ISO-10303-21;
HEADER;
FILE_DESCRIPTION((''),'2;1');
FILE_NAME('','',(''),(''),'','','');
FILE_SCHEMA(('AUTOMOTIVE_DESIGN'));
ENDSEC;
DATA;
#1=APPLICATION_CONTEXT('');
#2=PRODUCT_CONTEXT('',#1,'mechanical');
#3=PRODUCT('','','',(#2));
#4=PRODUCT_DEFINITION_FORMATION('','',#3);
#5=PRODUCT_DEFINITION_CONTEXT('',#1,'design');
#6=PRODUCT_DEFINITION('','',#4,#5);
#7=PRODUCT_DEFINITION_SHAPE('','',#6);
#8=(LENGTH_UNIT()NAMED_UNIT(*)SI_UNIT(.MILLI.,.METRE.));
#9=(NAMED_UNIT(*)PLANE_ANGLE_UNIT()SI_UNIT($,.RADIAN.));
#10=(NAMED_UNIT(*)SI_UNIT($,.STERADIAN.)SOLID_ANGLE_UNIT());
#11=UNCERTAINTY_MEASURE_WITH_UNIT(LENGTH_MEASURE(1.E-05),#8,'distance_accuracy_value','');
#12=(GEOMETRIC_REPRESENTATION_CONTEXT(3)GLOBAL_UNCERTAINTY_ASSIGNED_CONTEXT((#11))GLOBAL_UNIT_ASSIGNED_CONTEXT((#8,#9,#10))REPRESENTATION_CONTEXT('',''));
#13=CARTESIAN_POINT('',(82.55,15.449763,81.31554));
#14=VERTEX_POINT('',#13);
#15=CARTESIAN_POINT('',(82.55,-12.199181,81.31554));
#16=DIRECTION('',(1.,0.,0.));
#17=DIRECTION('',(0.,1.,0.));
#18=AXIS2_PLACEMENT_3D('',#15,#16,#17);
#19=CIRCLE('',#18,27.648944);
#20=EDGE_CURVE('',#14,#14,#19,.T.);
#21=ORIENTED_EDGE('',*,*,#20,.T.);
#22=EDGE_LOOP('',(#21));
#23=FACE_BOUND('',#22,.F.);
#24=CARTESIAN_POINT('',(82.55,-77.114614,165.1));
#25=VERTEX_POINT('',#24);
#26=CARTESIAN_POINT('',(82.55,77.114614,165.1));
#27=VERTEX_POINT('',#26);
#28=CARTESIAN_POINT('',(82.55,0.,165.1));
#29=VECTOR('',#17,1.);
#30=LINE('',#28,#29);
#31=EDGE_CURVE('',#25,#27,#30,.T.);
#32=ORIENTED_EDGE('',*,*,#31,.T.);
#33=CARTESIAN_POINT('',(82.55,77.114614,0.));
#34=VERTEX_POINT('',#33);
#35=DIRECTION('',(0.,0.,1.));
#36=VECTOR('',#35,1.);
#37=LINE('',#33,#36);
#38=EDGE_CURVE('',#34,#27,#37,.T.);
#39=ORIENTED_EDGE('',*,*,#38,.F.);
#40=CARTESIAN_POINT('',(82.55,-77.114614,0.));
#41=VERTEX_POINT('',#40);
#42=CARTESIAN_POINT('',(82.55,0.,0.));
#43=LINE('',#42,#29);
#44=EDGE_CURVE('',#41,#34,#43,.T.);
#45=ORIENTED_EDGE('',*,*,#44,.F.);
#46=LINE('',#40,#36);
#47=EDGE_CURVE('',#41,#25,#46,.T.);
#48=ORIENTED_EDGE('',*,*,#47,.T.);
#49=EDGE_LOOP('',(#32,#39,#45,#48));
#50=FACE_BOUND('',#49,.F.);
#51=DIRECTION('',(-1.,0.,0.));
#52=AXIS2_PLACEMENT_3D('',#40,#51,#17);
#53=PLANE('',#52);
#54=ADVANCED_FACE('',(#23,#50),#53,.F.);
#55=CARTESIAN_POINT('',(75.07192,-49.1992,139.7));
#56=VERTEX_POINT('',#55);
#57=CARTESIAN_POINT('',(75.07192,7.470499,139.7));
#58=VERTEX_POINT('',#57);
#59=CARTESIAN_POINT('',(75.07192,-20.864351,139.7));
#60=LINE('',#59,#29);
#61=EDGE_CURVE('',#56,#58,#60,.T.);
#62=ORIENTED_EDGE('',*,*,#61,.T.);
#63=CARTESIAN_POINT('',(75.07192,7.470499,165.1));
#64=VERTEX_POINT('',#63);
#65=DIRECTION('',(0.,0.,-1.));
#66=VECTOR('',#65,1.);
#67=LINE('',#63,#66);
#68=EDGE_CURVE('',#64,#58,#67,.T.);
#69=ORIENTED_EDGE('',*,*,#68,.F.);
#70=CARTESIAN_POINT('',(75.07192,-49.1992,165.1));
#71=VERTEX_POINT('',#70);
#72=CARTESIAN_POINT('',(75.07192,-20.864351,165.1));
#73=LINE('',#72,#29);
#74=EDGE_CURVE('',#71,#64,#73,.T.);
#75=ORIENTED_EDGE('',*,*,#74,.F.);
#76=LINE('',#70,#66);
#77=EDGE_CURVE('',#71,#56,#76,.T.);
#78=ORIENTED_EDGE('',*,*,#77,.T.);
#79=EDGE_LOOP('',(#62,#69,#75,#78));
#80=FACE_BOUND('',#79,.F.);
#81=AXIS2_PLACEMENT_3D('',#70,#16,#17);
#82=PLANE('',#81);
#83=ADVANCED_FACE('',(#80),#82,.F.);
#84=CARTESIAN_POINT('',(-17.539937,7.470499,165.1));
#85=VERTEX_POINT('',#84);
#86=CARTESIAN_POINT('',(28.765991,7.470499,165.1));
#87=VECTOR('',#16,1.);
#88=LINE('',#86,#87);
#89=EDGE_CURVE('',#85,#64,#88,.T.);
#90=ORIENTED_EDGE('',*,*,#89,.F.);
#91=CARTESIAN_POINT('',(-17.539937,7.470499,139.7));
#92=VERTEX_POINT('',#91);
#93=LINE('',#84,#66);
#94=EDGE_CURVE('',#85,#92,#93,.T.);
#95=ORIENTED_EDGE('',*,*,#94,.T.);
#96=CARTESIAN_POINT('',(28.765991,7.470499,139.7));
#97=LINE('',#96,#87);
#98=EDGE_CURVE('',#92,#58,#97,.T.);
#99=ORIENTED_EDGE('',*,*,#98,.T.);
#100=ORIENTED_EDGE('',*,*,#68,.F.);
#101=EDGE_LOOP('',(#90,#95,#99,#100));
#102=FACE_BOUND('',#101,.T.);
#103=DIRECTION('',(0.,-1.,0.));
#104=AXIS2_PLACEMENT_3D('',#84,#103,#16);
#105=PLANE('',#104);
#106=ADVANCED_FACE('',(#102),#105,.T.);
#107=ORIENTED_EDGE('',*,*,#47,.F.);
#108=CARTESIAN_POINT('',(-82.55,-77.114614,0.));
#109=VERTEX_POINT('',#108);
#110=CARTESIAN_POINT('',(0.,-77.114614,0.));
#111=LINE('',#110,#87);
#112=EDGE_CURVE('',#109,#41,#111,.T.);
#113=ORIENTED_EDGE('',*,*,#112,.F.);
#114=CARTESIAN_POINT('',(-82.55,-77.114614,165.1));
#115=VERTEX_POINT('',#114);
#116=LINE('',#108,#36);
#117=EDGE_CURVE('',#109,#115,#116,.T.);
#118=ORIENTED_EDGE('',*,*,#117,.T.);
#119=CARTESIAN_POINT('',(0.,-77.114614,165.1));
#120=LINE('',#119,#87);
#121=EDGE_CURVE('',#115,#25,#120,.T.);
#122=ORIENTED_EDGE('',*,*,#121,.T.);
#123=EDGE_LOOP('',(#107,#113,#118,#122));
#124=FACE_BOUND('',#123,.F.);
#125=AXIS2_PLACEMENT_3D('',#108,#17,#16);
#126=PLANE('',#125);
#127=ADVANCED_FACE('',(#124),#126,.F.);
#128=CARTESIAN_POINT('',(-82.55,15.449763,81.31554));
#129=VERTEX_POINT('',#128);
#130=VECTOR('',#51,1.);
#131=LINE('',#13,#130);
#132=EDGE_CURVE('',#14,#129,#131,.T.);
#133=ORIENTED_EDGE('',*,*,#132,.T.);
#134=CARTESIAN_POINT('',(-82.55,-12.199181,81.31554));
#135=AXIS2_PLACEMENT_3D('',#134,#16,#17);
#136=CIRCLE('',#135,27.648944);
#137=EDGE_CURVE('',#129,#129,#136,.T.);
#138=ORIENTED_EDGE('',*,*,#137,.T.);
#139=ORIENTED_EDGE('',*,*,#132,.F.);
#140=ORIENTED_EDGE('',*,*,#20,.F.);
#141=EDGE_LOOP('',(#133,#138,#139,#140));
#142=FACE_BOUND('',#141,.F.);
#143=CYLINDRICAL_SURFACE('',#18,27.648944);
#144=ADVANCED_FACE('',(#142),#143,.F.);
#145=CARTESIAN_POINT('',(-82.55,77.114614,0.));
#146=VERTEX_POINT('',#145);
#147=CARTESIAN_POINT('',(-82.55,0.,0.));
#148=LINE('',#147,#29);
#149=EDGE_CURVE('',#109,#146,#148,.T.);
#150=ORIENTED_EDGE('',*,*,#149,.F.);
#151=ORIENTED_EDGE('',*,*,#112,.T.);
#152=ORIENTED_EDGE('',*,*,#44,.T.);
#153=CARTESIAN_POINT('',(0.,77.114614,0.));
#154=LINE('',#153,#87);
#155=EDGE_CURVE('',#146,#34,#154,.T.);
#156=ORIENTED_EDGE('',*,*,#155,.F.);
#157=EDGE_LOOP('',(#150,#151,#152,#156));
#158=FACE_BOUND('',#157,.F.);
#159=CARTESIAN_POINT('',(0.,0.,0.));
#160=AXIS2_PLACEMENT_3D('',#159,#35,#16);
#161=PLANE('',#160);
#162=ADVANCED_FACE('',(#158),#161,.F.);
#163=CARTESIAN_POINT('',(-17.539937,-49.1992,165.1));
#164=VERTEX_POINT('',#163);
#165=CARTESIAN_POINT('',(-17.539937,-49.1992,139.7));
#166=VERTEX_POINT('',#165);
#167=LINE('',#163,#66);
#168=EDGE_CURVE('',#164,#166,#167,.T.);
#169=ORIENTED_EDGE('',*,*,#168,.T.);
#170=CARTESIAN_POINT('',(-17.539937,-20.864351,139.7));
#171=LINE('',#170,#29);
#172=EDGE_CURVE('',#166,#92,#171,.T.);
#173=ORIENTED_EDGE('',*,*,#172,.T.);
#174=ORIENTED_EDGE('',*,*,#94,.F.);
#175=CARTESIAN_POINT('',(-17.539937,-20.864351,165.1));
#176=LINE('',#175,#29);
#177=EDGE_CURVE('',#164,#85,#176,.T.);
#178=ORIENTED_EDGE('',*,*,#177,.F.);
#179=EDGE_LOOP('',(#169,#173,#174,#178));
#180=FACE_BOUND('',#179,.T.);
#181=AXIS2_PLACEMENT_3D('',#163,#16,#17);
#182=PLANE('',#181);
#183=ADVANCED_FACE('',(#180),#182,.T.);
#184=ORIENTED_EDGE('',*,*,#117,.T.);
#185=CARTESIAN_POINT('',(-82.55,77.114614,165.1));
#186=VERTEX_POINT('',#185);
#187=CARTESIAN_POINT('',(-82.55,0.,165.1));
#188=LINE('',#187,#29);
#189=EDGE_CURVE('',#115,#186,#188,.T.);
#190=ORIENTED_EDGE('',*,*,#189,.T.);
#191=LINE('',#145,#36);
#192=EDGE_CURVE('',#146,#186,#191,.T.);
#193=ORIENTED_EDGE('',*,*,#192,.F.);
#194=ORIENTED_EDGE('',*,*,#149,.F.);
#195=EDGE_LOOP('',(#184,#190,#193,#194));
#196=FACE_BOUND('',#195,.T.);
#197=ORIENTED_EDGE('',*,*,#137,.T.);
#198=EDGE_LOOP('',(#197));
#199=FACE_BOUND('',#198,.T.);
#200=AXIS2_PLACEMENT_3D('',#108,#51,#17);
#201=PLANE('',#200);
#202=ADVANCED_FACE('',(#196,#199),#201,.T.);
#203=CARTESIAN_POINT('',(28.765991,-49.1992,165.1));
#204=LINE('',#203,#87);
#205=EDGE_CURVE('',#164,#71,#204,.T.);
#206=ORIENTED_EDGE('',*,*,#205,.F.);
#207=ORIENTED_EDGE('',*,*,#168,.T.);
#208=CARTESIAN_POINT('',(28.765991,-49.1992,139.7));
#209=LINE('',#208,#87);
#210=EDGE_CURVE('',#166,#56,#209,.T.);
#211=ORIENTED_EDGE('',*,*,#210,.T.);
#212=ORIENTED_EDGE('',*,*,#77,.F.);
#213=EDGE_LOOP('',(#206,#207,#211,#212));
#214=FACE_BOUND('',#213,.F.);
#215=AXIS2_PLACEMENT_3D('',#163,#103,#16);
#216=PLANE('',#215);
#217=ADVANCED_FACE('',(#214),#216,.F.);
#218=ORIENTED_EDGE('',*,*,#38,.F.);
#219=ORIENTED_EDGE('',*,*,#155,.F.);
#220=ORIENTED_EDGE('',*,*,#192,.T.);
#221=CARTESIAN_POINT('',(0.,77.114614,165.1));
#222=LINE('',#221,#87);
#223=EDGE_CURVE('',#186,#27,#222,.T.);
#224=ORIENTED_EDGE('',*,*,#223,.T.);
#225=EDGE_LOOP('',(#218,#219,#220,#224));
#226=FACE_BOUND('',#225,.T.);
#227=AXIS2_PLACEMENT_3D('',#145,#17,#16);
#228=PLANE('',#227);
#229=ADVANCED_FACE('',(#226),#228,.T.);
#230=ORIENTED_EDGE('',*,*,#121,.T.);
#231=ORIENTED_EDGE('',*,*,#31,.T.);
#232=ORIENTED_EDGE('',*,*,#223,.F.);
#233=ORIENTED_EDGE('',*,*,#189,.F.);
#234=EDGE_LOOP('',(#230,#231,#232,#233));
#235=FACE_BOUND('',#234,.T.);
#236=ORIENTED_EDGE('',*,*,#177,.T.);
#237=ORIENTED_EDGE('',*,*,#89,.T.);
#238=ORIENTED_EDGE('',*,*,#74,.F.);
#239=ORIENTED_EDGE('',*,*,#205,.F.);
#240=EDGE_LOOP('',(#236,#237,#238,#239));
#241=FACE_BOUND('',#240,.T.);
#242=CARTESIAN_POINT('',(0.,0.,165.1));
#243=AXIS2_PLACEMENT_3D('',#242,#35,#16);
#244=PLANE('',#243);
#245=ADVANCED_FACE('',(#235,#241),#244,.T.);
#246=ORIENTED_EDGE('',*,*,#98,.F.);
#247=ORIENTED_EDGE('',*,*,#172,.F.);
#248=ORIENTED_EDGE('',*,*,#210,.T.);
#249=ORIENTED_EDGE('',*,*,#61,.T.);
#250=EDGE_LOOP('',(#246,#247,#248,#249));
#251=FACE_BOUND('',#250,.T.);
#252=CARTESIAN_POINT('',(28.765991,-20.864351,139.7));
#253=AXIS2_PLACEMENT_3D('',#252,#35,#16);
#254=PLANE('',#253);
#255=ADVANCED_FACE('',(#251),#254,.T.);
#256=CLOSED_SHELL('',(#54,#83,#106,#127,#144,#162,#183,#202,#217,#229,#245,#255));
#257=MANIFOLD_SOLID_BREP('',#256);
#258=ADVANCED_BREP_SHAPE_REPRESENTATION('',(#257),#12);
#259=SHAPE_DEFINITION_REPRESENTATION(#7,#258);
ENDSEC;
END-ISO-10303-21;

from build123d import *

# Parameters (mm, degrees)
F1_W     = 165.1
F1_H     = 154.2292288029
F2_DEPTH = 165.1
F3_R     = 27.6489440809
F4_DEPTH = 247.396
F5_W     = 92.6118567586
F5_H     = 56.6696990281
F6_DEPTH = 25.4


# Not quite as in the source:
# - a variable given as a bare number and used for a length is read in inches; the dataset says mm whatever the document's units were


with BuildPart() as f2:
    # F1 (on Top) → F2 (new body)
    with BuildSketch(Plane.XY):
        Rectangle(F1_W, F1_H)
    extrude(amount=F2_DEPTH)

    # F3 (on face) → F4 (cut)
    with BuildSketch(Plane.YZ.offset(82.55)):
        with Locations((-12.199181132, 81.3155397773)):
            Circle(F3_R)
    extrude(amount=-F4_DEPTH, mode=Mode.SUBTRACT)

    # F5 (on face) → F6 (cut)
    with BuildSketch(Plane.XY.offset(165.1)):
        with Locations((28.7659913301, -20.8643507212)):
            Rectangle(F5_W, F5_H)
    extrude(amount=-F6_DEPTH, mode=Mode.SUBTRACT)


solid = f2.part
